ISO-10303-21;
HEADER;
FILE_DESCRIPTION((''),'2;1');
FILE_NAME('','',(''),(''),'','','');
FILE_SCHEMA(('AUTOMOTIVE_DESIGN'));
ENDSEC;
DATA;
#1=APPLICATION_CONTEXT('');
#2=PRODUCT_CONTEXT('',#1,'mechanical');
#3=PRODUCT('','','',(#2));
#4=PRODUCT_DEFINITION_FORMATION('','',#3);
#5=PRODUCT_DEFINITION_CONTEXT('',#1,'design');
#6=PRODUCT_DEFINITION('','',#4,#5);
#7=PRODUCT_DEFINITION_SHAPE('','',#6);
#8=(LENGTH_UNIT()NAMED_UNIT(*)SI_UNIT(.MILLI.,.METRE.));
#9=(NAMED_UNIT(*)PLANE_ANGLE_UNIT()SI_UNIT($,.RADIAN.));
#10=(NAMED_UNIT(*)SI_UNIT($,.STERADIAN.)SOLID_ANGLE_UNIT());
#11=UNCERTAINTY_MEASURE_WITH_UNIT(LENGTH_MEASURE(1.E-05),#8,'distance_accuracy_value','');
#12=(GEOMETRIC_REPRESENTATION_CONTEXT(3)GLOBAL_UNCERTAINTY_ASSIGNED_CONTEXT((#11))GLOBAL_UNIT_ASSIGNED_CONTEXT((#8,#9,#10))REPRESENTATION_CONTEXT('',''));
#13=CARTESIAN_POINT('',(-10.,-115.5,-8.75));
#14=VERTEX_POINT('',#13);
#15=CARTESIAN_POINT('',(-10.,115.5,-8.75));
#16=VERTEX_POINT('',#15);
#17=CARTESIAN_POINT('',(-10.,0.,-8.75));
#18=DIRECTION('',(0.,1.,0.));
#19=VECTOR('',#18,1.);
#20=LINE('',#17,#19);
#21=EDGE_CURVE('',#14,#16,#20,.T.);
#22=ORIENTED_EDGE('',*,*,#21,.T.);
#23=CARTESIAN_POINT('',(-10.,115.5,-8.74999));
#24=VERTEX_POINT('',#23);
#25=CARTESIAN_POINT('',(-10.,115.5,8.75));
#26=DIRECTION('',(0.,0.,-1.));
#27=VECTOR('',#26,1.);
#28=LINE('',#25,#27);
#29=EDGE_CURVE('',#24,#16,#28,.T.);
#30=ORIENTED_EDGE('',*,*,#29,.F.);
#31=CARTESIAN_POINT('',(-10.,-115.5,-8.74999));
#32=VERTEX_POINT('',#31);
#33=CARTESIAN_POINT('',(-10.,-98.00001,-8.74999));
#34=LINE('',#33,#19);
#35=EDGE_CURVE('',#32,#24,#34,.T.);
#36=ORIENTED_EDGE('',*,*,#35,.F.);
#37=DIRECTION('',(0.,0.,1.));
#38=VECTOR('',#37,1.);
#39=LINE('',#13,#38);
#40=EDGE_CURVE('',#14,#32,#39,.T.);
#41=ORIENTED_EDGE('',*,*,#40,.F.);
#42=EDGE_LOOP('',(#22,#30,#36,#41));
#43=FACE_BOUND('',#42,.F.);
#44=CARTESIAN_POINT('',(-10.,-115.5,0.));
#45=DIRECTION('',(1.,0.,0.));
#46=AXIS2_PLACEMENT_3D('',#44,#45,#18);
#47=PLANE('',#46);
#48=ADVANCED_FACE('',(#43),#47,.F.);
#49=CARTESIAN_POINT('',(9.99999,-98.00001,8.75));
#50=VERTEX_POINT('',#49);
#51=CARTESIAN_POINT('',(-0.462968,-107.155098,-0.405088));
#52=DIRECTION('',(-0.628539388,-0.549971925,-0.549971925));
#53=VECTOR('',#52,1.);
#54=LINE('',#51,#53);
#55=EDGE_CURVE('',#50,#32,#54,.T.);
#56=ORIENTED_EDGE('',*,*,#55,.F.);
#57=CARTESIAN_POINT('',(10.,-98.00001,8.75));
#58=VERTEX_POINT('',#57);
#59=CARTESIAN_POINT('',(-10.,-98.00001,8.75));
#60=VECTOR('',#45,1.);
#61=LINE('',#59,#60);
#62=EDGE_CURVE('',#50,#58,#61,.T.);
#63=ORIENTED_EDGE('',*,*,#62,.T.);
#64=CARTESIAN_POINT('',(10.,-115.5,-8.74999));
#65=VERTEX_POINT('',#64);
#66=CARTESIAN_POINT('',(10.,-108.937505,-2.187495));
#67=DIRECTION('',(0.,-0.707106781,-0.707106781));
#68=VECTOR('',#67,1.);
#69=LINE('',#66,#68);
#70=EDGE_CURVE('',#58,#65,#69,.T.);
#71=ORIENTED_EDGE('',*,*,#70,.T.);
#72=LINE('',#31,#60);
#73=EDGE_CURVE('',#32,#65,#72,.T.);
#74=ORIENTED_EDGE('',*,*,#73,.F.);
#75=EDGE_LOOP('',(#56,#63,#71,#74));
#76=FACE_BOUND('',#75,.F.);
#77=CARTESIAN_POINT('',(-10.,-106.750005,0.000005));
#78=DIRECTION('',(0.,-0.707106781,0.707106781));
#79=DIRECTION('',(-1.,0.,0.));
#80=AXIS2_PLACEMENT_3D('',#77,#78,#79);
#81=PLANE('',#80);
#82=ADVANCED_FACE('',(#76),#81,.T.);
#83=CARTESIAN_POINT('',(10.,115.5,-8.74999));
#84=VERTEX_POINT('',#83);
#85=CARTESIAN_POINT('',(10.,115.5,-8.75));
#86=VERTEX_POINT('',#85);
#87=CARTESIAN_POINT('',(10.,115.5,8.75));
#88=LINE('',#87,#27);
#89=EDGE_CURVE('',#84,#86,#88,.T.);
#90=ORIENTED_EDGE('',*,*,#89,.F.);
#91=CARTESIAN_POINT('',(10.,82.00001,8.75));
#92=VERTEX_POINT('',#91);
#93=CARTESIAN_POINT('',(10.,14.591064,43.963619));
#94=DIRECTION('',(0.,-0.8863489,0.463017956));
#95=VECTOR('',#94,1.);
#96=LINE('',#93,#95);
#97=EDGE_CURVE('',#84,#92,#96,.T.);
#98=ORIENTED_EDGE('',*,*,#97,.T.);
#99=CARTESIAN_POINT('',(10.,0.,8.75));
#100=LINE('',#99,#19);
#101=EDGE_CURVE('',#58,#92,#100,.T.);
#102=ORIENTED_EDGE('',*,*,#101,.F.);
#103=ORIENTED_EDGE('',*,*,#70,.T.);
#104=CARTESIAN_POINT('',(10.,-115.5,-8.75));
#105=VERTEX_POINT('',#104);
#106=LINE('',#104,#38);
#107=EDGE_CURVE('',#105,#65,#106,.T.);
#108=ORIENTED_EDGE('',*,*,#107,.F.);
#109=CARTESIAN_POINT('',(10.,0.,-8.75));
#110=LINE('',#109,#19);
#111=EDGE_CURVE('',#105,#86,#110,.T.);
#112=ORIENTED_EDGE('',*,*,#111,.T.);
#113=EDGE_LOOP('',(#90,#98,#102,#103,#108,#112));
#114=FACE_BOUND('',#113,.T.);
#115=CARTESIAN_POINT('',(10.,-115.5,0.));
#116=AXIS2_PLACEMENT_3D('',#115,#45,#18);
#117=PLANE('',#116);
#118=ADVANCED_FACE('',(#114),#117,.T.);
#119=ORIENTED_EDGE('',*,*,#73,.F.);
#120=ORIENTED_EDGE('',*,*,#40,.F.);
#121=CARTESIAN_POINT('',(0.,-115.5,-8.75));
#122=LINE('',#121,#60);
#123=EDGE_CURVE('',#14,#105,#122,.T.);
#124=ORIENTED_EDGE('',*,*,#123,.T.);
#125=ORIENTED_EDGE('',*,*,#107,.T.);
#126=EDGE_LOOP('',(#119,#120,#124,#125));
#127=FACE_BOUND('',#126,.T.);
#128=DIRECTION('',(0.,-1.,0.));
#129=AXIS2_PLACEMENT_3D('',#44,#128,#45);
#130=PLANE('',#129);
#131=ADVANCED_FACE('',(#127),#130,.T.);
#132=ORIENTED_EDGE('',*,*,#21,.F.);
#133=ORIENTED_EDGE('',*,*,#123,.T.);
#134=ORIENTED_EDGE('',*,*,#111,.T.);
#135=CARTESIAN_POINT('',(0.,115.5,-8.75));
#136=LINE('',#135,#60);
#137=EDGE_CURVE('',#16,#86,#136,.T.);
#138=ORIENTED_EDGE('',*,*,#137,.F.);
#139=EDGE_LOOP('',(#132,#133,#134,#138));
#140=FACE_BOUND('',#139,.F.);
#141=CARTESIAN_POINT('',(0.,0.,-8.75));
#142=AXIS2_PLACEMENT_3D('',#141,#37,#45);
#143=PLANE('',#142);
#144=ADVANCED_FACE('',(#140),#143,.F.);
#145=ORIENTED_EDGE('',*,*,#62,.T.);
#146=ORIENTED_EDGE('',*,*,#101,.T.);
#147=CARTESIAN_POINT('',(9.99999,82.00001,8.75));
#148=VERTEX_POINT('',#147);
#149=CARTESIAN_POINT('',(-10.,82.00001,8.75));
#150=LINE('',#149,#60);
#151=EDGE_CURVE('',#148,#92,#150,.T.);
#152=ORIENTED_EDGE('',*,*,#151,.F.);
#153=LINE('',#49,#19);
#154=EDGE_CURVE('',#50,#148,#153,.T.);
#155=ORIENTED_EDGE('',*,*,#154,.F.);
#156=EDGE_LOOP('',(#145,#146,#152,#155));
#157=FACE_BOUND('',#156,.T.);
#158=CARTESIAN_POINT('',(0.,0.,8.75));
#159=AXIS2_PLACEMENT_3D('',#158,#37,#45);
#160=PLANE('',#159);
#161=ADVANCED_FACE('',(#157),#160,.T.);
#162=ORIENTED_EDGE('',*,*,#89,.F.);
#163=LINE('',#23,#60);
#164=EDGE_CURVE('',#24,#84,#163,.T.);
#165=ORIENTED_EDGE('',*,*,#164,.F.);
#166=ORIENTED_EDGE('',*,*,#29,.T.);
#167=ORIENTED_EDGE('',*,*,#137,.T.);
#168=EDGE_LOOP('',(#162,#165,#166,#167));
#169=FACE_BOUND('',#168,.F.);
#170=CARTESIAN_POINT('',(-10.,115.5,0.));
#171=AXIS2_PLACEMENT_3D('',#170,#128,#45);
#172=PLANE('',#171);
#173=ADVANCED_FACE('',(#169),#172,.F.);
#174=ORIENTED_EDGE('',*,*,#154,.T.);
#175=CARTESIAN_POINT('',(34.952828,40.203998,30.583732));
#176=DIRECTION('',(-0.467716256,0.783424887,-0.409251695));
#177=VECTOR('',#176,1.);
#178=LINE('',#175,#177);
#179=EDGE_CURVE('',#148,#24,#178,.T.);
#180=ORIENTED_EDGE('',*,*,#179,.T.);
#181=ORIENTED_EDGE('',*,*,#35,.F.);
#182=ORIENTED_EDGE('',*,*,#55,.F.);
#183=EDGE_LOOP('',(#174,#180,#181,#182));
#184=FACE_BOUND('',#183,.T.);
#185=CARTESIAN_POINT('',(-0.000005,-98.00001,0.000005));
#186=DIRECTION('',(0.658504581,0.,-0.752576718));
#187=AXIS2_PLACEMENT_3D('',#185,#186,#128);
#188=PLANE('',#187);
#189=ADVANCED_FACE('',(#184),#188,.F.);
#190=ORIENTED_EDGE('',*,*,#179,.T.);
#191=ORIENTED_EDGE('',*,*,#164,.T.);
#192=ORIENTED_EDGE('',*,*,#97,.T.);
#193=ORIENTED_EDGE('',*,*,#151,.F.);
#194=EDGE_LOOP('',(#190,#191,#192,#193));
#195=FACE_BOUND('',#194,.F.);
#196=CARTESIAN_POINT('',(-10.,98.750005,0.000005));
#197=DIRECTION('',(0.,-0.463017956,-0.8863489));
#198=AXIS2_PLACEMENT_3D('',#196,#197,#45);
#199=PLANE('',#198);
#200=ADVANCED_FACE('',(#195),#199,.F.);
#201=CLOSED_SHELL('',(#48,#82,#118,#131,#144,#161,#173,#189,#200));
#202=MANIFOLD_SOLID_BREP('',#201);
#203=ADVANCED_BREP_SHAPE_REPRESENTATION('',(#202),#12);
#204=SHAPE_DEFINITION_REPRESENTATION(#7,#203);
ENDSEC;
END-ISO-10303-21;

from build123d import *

# Parameters (mm, degrees)
F0_W     = 20
F0_H     = 231
F1_DEPTH = 8.75
F2_SIZE2 = 17.49999
F2_SIZE  = 17.49999
F3_SIZE2 = 33.49999
F3_SIZE  = 17.49999
F4_SIZE2 = 17.49999
F4_SIZE  = 19.99999


# Not quite as in the source:
# - a fillet or chamfer is up to 0.001 mm smaller than in the source, because OpenCascade refuses the exact size


with BuildPart() as f1:
    # F0 (on Top) → F1 (new body, symmetric)
    with BuildSketch(Plane.XY):
        Rectangle(F0_W, F0_H)
    extrude(amount=F1_DEPTH, both=True)

    # F2 (size 17.5 and 17.5 in the source; OpenCascade refuses exactly that, so slightly less here)
    f2_edges = [f1.edges().sort_by_distance(p)[0] for p in [
        (0, -115.5, 8.75),
    ]]
    chamfer(f2_edges, length=F2_SIZE, length2=F2_SIZE2)

    # F3 (size 17.5 and 33.5 in the source; OpenCascade refuses exactly that, so slightly less here)
    f3_edges = [f1.edges().sort_by_distance(p)[0] for p in [
        (0, 115.5, 8.75),
    ]]
    f3_side = f1.faces().sort_by_distance((0, 115.5, 0))[0]
    chamfer(f3_edges, length=F3_SIZE, length2=F3_SIZE2, reference=f3_side)

    # F4 (size 20 and 17.5 in the source; OpenCascade refuses exactly that, so slightly less here)
    f4_edges = [f1.edges().sort_by_distance(p)[0] for p in [
        (-10, -8, 8.75),
    ]]
    f4_side = f1.faces().sort_by_distance((0, -8, 8.75))[0]
    chamfer(f4_edges, length=F4_SIZE, length2=F4_SIZE2, reference=f4_side)


solid = f1.part
